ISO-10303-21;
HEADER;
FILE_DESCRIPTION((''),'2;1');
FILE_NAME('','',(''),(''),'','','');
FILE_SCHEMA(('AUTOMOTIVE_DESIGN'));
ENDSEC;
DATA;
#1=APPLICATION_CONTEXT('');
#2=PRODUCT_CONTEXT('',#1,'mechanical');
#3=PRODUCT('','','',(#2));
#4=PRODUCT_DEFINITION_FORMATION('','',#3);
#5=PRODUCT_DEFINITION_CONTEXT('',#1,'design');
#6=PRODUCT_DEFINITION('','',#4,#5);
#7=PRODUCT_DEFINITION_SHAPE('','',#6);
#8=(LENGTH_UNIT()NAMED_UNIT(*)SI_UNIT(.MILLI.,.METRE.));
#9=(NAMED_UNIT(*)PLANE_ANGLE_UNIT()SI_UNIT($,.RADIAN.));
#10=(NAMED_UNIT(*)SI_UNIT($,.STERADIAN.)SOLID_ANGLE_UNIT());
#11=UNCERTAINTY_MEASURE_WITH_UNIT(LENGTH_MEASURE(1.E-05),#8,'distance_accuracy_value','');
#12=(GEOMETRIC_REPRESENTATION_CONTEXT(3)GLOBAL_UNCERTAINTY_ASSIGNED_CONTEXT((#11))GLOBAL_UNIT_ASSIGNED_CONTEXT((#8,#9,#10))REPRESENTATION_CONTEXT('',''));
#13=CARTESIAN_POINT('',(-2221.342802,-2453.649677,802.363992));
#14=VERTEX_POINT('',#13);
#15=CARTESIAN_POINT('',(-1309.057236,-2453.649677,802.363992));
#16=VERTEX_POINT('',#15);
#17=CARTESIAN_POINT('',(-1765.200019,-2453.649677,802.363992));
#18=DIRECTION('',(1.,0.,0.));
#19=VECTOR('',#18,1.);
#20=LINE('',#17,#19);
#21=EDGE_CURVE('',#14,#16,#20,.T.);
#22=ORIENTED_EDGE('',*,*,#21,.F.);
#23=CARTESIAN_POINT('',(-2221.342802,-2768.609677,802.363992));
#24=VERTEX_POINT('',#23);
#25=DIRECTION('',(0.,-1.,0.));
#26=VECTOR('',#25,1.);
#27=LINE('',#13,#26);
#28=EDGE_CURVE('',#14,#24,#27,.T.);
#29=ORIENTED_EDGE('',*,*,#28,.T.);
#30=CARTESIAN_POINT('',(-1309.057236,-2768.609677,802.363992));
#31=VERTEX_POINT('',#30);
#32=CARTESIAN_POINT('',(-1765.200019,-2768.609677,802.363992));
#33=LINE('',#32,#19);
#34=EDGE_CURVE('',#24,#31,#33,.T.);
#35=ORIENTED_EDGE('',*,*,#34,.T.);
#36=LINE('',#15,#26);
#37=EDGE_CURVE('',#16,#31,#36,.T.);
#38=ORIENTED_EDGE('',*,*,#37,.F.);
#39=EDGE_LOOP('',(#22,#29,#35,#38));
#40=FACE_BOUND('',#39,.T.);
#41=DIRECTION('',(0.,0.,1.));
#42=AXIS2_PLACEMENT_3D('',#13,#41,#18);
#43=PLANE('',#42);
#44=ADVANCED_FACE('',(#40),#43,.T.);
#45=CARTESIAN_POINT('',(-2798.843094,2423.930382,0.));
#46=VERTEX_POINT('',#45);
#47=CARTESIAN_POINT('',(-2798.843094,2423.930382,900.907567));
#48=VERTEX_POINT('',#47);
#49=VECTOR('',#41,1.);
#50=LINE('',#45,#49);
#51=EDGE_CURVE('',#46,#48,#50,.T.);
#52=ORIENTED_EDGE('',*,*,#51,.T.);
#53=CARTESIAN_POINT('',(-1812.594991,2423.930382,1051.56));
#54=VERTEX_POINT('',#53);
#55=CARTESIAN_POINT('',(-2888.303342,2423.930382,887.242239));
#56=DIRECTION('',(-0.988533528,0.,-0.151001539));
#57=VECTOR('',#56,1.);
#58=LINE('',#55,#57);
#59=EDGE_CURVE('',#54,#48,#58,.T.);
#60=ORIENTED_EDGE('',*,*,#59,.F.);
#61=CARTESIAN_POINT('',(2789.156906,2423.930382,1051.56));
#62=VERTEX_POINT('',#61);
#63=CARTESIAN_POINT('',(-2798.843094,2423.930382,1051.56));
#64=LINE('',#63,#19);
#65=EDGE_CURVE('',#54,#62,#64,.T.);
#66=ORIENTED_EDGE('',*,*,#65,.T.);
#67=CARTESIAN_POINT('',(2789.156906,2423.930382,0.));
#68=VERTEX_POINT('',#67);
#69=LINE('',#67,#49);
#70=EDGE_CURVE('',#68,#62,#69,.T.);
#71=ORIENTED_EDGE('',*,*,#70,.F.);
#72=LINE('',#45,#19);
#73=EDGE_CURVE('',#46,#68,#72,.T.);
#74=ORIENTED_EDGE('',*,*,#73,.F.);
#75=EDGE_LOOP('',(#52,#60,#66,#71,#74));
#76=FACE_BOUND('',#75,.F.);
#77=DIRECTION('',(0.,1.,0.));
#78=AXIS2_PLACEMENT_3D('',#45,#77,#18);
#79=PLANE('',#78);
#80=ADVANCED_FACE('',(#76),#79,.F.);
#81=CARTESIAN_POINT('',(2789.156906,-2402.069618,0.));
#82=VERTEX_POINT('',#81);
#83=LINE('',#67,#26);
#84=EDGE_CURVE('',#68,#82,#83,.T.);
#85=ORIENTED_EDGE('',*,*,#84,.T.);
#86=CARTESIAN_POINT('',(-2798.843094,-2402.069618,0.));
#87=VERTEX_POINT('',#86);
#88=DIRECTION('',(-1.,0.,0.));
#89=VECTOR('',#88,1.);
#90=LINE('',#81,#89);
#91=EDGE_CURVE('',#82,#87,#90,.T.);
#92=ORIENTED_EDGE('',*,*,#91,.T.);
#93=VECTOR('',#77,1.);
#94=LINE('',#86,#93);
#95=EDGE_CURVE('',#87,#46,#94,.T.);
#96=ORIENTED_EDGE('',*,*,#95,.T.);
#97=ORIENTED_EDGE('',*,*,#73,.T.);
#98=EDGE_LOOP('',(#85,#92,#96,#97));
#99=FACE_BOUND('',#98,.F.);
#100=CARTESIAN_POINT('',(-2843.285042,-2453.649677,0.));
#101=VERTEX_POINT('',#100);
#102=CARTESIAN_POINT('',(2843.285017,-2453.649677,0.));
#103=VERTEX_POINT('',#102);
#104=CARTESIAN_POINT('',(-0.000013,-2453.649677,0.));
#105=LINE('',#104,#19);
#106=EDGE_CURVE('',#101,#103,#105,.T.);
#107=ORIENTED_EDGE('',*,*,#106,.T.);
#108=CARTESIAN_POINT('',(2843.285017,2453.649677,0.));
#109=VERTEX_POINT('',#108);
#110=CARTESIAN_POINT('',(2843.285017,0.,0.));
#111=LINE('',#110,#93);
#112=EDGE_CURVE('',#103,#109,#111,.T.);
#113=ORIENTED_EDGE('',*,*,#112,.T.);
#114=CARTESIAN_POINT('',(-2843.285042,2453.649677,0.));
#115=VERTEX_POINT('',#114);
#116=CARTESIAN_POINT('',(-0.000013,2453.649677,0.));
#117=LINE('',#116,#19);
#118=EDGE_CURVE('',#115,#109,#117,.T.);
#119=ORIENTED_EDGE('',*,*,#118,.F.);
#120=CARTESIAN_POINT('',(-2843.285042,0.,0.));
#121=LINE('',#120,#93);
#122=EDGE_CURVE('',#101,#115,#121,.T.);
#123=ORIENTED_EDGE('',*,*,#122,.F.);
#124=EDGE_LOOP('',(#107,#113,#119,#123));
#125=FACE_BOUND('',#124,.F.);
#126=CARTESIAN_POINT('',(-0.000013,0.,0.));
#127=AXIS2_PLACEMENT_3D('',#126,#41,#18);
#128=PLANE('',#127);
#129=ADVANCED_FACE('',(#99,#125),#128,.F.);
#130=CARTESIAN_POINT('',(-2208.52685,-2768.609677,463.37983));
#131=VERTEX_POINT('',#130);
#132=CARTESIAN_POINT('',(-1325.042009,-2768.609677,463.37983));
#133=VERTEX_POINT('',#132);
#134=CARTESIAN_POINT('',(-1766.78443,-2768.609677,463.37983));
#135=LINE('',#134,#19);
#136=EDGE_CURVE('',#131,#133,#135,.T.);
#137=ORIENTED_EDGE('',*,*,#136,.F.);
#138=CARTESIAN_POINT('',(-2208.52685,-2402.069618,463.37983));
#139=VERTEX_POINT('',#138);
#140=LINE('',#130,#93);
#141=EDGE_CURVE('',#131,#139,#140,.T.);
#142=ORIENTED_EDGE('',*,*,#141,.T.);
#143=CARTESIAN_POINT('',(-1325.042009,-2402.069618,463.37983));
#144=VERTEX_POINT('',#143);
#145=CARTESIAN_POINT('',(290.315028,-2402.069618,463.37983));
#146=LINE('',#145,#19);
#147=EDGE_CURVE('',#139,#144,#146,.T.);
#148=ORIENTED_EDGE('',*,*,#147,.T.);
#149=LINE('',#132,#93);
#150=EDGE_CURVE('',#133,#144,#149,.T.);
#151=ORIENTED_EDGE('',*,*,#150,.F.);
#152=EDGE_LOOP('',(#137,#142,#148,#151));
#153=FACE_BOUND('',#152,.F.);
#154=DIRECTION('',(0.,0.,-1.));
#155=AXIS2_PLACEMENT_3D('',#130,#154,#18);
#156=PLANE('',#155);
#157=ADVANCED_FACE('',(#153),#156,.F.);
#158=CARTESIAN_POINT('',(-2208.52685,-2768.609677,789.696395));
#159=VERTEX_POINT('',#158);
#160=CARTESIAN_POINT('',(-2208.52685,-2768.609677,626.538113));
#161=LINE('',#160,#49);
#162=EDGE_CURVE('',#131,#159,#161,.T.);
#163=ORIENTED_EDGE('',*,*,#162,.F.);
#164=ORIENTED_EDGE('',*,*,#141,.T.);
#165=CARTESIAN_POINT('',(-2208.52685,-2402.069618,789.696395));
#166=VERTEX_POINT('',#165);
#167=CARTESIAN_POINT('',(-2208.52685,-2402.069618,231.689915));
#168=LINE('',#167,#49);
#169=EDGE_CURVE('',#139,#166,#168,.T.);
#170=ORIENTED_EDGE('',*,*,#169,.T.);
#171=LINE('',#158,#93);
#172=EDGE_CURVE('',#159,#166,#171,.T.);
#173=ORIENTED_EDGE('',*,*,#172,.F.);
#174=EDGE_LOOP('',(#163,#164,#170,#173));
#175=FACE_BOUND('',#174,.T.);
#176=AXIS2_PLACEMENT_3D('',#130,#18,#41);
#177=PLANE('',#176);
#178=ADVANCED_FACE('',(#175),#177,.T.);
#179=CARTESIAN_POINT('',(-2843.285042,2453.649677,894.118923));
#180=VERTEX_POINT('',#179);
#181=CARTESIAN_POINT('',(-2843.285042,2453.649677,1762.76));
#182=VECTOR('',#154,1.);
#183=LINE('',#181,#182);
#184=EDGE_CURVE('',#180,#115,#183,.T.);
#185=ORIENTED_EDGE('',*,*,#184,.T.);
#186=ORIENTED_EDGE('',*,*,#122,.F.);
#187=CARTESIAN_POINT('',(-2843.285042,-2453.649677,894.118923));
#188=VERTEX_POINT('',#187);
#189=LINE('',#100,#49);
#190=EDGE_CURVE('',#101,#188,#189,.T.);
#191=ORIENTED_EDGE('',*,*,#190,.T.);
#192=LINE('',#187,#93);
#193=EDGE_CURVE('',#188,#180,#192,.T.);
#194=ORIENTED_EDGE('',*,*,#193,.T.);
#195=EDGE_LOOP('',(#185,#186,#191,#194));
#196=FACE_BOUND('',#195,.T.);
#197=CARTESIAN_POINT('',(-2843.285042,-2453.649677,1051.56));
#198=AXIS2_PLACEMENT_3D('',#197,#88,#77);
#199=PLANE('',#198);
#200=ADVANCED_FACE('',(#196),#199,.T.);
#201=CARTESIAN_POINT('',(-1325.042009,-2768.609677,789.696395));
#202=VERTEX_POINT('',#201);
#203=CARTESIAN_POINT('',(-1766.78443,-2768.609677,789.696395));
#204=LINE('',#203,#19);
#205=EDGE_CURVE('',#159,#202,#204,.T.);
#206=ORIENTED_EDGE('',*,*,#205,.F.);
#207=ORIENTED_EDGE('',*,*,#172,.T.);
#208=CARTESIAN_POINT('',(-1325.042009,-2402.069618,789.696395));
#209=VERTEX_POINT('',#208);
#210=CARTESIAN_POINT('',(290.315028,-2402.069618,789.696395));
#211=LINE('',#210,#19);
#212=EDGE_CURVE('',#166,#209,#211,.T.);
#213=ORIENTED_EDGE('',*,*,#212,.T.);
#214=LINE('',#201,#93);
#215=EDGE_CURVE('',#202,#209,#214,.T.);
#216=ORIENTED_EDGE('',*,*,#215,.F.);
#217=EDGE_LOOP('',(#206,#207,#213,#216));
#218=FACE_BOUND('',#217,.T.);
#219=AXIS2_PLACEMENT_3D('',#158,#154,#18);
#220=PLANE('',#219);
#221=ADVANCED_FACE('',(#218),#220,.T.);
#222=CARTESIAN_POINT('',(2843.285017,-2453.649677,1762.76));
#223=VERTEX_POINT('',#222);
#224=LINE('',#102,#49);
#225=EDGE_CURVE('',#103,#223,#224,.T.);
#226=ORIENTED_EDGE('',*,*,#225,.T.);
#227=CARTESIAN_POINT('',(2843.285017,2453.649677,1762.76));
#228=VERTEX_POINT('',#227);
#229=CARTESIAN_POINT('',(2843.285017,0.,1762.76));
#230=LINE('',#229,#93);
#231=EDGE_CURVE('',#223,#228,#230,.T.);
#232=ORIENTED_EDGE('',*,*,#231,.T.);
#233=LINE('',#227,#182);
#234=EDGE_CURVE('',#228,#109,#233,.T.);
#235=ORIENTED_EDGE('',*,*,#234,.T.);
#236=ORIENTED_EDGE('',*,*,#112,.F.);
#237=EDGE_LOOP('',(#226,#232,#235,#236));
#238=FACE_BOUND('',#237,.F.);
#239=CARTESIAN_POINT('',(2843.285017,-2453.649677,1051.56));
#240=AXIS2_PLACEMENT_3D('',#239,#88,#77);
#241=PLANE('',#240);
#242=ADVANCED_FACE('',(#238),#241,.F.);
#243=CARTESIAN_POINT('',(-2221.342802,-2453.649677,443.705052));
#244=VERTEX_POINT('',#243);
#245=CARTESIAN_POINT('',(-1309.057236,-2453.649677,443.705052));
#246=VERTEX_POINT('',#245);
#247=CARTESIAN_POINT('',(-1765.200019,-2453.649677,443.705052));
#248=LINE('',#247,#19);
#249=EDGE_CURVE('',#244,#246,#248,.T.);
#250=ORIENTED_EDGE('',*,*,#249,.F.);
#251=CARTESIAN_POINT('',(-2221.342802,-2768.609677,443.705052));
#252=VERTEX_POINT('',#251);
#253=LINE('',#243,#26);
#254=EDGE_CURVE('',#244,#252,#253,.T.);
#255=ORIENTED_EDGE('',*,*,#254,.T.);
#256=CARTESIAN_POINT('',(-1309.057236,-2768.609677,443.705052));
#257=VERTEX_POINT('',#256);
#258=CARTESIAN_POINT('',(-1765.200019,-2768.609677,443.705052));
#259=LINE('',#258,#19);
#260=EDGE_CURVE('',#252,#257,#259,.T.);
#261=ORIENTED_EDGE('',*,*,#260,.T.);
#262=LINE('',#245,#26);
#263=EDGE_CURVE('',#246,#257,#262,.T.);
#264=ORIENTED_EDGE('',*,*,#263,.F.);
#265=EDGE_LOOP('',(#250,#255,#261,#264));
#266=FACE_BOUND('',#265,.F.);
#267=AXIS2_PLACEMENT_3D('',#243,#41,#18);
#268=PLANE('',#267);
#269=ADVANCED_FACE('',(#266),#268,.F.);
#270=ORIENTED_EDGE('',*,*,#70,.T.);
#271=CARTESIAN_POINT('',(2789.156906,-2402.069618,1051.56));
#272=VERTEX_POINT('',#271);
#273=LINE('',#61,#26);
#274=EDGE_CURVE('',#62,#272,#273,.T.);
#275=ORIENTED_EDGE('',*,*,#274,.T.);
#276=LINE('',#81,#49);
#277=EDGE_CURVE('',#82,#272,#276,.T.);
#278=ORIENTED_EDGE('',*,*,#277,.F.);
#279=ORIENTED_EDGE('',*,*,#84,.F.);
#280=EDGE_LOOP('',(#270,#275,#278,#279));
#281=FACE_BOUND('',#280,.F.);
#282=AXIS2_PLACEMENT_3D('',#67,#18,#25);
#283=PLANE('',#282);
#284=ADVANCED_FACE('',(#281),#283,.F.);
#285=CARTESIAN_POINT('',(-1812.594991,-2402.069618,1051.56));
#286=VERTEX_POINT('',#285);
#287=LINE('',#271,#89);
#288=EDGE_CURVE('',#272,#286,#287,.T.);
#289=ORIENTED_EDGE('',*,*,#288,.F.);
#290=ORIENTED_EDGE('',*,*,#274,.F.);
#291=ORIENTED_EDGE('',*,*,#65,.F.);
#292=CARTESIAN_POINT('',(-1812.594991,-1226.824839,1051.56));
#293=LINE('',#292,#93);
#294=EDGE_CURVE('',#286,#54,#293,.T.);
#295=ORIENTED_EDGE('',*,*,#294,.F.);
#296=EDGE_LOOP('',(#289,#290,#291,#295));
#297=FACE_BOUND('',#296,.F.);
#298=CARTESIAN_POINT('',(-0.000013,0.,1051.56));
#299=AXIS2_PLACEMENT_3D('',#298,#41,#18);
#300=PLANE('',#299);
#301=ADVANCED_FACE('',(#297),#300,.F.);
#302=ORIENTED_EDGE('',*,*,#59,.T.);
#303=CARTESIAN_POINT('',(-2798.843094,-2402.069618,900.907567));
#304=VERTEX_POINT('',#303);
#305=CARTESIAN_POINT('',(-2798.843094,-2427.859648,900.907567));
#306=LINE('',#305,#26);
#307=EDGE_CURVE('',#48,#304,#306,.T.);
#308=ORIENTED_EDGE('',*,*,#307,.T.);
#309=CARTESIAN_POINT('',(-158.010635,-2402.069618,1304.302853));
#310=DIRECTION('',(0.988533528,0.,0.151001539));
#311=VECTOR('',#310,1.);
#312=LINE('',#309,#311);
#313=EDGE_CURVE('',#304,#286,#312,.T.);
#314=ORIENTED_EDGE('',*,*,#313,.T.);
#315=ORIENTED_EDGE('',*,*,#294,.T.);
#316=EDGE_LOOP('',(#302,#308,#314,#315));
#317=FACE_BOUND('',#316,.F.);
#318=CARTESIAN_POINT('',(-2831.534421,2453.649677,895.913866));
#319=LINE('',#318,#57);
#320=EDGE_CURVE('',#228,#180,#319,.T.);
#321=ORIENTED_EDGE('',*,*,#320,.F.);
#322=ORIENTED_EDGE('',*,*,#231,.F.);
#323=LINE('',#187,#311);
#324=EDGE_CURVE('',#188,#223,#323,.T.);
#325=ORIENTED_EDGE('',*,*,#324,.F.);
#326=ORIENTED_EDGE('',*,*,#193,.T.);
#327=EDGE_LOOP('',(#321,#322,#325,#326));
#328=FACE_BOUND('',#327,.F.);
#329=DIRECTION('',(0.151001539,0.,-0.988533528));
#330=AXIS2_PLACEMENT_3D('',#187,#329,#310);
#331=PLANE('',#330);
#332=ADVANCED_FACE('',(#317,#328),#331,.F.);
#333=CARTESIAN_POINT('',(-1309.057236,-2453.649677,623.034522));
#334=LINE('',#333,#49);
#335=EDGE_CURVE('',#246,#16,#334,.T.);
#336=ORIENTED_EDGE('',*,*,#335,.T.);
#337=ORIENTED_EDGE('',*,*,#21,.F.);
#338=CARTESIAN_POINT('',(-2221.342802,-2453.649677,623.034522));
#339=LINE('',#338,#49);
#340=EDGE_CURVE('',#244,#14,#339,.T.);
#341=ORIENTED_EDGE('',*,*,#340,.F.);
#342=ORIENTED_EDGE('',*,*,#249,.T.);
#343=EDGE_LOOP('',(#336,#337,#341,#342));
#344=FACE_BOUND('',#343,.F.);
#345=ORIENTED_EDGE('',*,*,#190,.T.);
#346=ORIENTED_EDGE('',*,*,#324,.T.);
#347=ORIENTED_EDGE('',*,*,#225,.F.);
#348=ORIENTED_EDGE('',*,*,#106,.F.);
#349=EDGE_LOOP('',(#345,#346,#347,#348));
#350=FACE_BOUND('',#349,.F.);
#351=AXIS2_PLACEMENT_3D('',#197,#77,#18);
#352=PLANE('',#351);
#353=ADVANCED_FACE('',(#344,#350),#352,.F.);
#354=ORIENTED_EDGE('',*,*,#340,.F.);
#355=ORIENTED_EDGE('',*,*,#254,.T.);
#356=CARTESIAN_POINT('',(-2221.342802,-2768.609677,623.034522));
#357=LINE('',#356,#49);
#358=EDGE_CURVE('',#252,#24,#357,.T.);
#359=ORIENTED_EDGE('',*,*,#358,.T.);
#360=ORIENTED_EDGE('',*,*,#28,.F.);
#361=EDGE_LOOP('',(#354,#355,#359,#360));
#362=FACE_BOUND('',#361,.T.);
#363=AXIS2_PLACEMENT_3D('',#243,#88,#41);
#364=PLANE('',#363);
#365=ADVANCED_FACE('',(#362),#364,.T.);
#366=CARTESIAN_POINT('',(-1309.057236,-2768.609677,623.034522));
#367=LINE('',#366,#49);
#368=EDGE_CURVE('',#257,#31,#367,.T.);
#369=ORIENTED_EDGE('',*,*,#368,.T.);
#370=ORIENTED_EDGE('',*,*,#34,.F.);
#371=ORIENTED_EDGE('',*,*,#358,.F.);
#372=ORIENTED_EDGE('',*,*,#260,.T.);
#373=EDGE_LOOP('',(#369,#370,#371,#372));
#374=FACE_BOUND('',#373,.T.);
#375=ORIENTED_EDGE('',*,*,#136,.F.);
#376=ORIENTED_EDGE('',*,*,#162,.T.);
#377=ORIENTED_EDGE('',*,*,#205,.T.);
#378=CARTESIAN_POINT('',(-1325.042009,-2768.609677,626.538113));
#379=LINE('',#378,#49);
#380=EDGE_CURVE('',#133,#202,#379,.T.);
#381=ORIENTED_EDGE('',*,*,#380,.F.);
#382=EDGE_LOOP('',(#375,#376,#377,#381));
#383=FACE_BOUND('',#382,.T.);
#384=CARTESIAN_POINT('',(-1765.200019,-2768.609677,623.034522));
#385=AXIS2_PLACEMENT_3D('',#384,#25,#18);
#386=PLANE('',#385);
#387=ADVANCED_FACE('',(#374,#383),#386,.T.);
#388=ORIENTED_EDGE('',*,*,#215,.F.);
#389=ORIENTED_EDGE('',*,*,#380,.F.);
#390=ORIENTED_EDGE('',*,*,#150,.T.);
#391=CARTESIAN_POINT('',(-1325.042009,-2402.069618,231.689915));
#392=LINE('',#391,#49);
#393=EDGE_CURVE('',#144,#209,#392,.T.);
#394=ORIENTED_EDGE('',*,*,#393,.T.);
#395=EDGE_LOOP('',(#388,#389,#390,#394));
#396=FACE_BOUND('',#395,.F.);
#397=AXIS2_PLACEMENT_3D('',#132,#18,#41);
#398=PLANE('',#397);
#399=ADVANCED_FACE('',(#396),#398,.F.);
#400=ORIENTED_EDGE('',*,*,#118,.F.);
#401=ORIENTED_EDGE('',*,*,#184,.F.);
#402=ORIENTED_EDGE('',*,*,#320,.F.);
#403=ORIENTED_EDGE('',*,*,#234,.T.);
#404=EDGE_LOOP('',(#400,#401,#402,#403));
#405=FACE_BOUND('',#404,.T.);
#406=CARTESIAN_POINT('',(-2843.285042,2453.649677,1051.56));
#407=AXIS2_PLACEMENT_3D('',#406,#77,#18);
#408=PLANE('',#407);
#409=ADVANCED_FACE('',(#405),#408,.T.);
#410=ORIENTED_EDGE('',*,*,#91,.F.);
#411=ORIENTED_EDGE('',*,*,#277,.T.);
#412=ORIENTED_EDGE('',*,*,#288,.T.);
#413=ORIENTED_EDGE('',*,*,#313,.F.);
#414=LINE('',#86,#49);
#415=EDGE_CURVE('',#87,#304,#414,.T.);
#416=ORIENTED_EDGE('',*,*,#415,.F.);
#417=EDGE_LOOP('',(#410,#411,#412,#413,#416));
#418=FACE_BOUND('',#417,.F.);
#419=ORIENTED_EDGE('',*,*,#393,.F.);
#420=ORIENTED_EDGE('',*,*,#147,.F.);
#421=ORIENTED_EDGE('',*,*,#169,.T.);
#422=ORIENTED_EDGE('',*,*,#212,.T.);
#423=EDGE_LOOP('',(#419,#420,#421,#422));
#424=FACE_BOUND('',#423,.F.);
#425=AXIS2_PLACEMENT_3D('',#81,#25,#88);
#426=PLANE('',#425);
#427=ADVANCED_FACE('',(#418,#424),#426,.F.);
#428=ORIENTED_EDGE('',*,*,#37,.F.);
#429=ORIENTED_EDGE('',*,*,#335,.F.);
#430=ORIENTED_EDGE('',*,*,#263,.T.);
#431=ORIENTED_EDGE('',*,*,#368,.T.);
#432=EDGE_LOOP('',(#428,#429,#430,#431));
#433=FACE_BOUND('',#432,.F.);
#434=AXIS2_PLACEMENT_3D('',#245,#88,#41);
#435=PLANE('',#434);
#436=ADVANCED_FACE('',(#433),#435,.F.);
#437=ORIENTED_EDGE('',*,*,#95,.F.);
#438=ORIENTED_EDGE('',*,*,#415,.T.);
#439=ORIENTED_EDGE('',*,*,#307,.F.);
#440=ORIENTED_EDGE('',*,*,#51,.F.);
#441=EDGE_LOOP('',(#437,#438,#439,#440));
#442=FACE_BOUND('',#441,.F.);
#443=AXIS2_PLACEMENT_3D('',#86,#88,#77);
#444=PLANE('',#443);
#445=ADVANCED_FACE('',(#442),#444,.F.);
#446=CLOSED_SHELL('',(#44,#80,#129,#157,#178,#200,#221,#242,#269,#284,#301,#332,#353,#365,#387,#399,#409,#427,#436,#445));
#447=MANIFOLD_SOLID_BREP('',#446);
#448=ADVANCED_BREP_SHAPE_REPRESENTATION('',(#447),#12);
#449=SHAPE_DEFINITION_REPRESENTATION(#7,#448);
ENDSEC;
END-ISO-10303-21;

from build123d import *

# Parameters (mm, degrees)
F0_W      = 5686.5700594
F0_H      = 4907.2993548
F2_DEPTH  = 1051.56
F3_W      = 912.28556633
F3_H      = 358.6589396
F4_DEPTH  = 314.96
F5_W      = 883.4848403931
F5_H      = 326.3165652752
F6_DEPTH  = 1803.4
F7_W      = 5686.5700594
F7_H      = 4907.2993548
F8_DEPTH  = 711.2
F10_DEPTH = 6418.58


# Not quite as in the source:
# - the program builds the solid bodies; features that only make, move or delete a surface that nothing else refers to are left out


with BuildPart() as f2:
    # F0 (on Top) → F2 (new body)
    with BuildSketch(Plane.XY):
        with Locations((-1.27e-05, 0)):
            Rectangle(F0_W, F0_H)
        Polygon((-2798.8430942, 1200.4981324), (-2798.8430942, 2423.930382), (-1600.664185, 2423.930382), (-1528.8430942, 2423.930382), (2789.1569058, 2423.930382), (2789.1569058, -2402.069618), (-2798.8430942, -2402.069618), (-2798.8430942, 1128.530382), align=None, mode=Mode.SUBTRACT)
    extrude(amount=F2_DEPTH)

    # F3 (on face) → F4 (join)
    with BuildSketch(Plane.XZ.offset(2453.6496774)):
        with Locations((-1765.2000188828, 623.0345219374)):
            Rectangle(F3_W, F3_H)
    extrude(amount=F4_DEPTH)

    # F5 (on face) → F6 (cut)
    with BuildSketch(Plane.XZ.offset(2768.6096774)):
        with Locations((-1766.7844295502, 626.5381127596)):
            Rectangle(F5_W, F5_H)
    extrude(amount=-F6_DEPTH, mode=Mode.SUBTRACT)

    # F7 (on face) → F8 (join)
    with BuildSketch(Plane.XY.offset(1051.56)):
        with Locations((-1.27e-05, 0)):
            Rectangle(F7_W, F7_H)
    extrude(amount=F8_DEPTH)

    # F9 (on face) → F10 (cut)
    with BuildSketch(Plane.XZ.offset(2453.6496774)):
        Polygon((-2843.2850424, 1762.76), (-2843.2850424, 894.1189227129), (2843.285017, 1762.76), align=None)
    extrude(amount=-F10_DEPTH, mode=Mode.SUBTRACT)


solid = f2.part
